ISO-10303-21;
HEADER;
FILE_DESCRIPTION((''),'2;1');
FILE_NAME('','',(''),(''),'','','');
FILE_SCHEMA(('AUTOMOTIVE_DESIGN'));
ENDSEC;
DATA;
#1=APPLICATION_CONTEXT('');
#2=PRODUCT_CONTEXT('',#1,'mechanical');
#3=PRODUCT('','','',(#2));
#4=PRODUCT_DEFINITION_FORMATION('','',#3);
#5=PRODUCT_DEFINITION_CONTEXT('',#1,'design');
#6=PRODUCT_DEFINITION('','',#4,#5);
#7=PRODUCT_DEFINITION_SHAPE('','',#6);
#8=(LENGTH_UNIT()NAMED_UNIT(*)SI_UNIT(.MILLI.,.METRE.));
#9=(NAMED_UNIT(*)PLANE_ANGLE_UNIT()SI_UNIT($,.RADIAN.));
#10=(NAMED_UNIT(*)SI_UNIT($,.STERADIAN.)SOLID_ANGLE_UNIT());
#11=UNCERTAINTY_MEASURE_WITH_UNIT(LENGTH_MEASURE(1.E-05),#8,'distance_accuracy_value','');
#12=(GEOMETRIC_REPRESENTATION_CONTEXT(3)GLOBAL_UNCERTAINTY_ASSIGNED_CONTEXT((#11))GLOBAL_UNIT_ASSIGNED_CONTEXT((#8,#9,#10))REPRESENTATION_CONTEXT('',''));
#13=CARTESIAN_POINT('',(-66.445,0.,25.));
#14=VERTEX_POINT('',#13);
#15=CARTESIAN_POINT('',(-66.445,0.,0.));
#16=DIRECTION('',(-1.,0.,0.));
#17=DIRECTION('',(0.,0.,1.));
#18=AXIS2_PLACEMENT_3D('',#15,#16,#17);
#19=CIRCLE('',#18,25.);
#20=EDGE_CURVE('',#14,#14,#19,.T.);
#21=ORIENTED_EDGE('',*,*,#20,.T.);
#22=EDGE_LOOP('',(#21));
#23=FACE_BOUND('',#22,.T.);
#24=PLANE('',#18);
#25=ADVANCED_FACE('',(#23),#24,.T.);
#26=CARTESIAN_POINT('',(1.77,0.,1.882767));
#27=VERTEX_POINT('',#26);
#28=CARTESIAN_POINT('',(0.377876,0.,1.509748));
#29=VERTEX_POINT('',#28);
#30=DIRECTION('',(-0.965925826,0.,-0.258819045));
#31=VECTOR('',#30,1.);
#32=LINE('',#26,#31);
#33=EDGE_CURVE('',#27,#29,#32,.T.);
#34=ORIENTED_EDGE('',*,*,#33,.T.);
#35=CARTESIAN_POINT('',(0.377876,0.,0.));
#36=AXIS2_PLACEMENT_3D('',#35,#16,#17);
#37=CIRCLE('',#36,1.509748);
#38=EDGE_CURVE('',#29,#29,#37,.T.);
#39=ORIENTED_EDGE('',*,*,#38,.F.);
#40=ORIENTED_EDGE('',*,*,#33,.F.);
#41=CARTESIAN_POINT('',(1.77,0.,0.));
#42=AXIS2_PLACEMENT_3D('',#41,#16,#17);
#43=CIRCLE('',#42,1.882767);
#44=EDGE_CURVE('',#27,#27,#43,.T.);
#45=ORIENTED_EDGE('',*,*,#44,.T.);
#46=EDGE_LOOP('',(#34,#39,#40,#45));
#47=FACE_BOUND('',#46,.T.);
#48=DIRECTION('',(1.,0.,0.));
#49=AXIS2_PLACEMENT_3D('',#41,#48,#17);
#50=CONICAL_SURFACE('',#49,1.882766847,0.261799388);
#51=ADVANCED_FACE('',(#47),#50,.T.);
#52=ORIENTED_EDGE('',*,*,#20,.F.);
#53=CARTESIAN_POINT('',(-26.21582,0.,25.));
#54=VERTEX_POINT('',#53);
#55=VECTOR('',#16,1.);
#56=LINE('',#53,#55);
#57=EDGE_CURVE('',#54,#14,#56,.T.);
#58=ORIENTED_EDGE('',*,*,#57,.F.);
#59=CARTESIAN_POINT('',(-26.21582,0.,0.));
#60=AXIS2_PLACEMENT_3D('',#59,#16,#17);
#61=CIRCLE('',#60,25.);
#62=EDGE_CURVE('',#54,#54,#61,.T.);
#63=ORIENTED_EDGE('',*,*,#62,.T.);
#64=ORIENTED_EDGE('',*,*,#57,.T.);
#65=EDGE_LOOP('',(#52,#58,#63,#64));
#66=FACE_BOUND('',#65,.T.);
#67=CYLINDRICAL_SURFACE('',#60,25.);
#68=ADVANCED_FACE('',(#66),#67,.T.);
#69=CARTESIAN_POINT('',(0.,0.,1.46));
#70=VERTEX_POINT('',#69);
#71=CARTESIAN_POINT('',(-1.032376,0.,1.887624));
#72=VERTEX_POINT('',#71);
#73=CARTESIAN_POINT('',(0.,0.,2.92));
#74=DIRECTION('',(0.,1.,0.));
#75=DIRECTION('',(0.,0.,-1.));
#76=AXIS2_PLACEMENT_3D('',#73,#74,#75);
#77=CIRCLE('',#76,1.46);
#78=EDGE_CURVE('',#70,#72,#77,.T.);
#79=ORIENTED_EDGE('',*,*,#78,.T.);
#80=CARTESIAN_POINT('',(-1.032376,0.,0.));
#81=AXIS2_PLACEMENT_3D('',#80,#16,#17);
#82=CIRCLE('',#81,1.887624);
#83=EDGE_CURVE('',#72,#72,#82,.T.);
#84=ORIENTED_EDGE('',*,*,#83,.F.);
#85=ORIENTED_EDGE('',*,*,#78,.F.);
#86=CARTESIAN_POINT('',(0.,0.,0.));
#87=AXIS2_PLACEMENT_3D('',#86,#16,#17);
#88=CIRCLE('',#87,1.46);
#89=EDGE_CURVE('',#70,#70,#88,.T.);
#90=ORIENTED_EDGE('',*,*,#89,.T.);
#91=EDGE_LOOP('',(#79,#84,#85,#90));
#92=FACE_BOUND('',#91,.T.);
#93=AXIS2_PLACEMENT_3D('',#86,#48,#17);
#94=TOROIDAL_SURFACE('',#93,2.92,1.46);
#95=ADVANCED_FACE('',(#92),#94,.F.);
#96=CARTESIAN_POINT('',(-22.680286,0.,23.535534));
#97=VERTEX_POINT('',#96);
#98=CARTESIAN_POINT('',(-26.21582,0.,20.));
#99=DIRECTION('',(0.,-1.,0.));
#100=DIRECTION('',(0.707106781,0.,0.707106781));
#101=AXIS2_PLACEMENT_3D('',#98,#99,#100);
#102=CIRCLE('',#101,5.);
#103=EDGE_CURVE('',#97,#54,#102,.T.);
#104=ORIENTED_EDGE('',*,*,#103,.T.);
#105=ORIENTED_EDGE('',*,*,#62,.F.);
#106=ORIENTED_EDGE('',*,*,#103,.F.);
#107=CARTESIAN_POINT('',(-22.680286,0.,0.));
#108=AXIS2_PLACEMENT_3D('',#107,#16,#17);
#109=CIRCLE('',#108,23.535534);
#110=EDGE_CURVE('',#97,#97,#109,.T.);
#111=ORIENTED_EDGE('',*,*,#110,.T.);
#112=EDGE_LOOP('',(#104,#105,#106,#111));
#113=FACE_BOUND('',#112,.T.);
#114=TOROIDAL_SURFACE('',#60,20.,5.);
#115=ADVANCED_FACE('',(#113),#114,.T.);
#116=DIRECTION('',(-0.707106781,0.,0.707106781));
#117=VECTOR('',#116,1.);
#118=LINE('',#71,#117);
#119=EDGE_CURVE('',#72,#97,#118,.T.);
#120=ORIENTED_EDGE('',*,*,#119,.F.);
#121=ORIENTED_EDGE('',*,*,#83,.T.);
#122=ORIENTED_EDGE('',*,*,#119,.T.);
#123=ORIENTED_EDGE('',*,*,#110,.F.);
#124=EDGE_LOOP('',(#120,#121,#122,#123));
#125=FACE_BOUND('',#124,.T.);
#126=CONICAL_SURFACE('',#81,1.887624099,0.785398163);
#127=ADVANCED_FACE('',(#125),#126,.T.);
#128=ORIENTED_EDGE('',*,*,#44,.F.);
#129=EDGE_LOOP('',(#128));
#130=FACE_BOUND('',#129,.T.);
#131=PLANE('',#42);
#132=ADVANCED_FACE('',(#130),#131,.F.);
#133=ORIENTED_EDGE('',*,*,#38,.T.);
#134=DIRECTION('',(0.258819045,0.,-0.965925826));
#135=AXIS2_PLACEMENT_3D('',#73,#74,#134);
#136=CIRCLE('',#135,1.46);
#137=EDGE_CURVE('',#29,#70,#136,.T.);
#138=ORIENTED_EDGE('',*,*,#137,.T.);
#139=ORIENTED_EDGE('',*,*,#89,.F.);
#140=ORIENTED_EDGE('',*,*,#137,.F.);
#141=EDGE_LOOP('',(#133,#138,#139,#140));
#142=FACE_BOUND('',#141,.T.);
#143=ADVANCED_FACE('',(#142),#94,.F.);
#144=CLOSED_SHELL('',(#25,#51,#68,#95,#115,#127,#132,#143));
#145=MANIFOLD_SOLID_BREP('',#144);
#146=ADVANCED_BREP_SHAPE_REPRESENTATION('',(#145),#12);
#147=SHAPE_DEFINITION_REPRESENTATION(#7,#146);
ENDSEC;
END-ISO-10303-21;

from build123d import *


# Not quite as in the source:
# - a feature of the source that left no trace in its solid (it failed there, or was rolled back) is left out


with BuildPart() as f2:
    # F0 (on Front) → F2 (revolve)
    with BuildSketch(Plane.XZ):
        with BuildLine():
            ThreePointArc((0.3778758058, 1.5097482936), (0.1905682406, 1.4724905024), (0, 1.46))
            ThreePointArc((0, 1.46), (-0.5587178113, 1.5711358825), (-1.0323759005, 1.8876240995))
            Line((-1.0323759005, 1.8876240995), (-22.680285707, 23.5355339059))
            ThreePointArc((-22.680285707, 23.5355339059), (-24.3024024511, 24.6193976626), (-26.2158196129, 25))
            Line((-26.2158196129, 25), (-66.445, 25))
            Line((-66.445, 25), (-66.445, 0))
            Line((-66.445, 0), (0, 0))
            Line((0, 0), (1.77, 0))
            Line((1.77, 0), (1.77, 1.8827668472))
            Line((1.77, 1.8827668472), (0.3778758058, 1.5097482936))
        make_face()
    revolve(axis=Axis((-33.2225, 0, 0), (-1, 0, 0)))


solid = f2.part
